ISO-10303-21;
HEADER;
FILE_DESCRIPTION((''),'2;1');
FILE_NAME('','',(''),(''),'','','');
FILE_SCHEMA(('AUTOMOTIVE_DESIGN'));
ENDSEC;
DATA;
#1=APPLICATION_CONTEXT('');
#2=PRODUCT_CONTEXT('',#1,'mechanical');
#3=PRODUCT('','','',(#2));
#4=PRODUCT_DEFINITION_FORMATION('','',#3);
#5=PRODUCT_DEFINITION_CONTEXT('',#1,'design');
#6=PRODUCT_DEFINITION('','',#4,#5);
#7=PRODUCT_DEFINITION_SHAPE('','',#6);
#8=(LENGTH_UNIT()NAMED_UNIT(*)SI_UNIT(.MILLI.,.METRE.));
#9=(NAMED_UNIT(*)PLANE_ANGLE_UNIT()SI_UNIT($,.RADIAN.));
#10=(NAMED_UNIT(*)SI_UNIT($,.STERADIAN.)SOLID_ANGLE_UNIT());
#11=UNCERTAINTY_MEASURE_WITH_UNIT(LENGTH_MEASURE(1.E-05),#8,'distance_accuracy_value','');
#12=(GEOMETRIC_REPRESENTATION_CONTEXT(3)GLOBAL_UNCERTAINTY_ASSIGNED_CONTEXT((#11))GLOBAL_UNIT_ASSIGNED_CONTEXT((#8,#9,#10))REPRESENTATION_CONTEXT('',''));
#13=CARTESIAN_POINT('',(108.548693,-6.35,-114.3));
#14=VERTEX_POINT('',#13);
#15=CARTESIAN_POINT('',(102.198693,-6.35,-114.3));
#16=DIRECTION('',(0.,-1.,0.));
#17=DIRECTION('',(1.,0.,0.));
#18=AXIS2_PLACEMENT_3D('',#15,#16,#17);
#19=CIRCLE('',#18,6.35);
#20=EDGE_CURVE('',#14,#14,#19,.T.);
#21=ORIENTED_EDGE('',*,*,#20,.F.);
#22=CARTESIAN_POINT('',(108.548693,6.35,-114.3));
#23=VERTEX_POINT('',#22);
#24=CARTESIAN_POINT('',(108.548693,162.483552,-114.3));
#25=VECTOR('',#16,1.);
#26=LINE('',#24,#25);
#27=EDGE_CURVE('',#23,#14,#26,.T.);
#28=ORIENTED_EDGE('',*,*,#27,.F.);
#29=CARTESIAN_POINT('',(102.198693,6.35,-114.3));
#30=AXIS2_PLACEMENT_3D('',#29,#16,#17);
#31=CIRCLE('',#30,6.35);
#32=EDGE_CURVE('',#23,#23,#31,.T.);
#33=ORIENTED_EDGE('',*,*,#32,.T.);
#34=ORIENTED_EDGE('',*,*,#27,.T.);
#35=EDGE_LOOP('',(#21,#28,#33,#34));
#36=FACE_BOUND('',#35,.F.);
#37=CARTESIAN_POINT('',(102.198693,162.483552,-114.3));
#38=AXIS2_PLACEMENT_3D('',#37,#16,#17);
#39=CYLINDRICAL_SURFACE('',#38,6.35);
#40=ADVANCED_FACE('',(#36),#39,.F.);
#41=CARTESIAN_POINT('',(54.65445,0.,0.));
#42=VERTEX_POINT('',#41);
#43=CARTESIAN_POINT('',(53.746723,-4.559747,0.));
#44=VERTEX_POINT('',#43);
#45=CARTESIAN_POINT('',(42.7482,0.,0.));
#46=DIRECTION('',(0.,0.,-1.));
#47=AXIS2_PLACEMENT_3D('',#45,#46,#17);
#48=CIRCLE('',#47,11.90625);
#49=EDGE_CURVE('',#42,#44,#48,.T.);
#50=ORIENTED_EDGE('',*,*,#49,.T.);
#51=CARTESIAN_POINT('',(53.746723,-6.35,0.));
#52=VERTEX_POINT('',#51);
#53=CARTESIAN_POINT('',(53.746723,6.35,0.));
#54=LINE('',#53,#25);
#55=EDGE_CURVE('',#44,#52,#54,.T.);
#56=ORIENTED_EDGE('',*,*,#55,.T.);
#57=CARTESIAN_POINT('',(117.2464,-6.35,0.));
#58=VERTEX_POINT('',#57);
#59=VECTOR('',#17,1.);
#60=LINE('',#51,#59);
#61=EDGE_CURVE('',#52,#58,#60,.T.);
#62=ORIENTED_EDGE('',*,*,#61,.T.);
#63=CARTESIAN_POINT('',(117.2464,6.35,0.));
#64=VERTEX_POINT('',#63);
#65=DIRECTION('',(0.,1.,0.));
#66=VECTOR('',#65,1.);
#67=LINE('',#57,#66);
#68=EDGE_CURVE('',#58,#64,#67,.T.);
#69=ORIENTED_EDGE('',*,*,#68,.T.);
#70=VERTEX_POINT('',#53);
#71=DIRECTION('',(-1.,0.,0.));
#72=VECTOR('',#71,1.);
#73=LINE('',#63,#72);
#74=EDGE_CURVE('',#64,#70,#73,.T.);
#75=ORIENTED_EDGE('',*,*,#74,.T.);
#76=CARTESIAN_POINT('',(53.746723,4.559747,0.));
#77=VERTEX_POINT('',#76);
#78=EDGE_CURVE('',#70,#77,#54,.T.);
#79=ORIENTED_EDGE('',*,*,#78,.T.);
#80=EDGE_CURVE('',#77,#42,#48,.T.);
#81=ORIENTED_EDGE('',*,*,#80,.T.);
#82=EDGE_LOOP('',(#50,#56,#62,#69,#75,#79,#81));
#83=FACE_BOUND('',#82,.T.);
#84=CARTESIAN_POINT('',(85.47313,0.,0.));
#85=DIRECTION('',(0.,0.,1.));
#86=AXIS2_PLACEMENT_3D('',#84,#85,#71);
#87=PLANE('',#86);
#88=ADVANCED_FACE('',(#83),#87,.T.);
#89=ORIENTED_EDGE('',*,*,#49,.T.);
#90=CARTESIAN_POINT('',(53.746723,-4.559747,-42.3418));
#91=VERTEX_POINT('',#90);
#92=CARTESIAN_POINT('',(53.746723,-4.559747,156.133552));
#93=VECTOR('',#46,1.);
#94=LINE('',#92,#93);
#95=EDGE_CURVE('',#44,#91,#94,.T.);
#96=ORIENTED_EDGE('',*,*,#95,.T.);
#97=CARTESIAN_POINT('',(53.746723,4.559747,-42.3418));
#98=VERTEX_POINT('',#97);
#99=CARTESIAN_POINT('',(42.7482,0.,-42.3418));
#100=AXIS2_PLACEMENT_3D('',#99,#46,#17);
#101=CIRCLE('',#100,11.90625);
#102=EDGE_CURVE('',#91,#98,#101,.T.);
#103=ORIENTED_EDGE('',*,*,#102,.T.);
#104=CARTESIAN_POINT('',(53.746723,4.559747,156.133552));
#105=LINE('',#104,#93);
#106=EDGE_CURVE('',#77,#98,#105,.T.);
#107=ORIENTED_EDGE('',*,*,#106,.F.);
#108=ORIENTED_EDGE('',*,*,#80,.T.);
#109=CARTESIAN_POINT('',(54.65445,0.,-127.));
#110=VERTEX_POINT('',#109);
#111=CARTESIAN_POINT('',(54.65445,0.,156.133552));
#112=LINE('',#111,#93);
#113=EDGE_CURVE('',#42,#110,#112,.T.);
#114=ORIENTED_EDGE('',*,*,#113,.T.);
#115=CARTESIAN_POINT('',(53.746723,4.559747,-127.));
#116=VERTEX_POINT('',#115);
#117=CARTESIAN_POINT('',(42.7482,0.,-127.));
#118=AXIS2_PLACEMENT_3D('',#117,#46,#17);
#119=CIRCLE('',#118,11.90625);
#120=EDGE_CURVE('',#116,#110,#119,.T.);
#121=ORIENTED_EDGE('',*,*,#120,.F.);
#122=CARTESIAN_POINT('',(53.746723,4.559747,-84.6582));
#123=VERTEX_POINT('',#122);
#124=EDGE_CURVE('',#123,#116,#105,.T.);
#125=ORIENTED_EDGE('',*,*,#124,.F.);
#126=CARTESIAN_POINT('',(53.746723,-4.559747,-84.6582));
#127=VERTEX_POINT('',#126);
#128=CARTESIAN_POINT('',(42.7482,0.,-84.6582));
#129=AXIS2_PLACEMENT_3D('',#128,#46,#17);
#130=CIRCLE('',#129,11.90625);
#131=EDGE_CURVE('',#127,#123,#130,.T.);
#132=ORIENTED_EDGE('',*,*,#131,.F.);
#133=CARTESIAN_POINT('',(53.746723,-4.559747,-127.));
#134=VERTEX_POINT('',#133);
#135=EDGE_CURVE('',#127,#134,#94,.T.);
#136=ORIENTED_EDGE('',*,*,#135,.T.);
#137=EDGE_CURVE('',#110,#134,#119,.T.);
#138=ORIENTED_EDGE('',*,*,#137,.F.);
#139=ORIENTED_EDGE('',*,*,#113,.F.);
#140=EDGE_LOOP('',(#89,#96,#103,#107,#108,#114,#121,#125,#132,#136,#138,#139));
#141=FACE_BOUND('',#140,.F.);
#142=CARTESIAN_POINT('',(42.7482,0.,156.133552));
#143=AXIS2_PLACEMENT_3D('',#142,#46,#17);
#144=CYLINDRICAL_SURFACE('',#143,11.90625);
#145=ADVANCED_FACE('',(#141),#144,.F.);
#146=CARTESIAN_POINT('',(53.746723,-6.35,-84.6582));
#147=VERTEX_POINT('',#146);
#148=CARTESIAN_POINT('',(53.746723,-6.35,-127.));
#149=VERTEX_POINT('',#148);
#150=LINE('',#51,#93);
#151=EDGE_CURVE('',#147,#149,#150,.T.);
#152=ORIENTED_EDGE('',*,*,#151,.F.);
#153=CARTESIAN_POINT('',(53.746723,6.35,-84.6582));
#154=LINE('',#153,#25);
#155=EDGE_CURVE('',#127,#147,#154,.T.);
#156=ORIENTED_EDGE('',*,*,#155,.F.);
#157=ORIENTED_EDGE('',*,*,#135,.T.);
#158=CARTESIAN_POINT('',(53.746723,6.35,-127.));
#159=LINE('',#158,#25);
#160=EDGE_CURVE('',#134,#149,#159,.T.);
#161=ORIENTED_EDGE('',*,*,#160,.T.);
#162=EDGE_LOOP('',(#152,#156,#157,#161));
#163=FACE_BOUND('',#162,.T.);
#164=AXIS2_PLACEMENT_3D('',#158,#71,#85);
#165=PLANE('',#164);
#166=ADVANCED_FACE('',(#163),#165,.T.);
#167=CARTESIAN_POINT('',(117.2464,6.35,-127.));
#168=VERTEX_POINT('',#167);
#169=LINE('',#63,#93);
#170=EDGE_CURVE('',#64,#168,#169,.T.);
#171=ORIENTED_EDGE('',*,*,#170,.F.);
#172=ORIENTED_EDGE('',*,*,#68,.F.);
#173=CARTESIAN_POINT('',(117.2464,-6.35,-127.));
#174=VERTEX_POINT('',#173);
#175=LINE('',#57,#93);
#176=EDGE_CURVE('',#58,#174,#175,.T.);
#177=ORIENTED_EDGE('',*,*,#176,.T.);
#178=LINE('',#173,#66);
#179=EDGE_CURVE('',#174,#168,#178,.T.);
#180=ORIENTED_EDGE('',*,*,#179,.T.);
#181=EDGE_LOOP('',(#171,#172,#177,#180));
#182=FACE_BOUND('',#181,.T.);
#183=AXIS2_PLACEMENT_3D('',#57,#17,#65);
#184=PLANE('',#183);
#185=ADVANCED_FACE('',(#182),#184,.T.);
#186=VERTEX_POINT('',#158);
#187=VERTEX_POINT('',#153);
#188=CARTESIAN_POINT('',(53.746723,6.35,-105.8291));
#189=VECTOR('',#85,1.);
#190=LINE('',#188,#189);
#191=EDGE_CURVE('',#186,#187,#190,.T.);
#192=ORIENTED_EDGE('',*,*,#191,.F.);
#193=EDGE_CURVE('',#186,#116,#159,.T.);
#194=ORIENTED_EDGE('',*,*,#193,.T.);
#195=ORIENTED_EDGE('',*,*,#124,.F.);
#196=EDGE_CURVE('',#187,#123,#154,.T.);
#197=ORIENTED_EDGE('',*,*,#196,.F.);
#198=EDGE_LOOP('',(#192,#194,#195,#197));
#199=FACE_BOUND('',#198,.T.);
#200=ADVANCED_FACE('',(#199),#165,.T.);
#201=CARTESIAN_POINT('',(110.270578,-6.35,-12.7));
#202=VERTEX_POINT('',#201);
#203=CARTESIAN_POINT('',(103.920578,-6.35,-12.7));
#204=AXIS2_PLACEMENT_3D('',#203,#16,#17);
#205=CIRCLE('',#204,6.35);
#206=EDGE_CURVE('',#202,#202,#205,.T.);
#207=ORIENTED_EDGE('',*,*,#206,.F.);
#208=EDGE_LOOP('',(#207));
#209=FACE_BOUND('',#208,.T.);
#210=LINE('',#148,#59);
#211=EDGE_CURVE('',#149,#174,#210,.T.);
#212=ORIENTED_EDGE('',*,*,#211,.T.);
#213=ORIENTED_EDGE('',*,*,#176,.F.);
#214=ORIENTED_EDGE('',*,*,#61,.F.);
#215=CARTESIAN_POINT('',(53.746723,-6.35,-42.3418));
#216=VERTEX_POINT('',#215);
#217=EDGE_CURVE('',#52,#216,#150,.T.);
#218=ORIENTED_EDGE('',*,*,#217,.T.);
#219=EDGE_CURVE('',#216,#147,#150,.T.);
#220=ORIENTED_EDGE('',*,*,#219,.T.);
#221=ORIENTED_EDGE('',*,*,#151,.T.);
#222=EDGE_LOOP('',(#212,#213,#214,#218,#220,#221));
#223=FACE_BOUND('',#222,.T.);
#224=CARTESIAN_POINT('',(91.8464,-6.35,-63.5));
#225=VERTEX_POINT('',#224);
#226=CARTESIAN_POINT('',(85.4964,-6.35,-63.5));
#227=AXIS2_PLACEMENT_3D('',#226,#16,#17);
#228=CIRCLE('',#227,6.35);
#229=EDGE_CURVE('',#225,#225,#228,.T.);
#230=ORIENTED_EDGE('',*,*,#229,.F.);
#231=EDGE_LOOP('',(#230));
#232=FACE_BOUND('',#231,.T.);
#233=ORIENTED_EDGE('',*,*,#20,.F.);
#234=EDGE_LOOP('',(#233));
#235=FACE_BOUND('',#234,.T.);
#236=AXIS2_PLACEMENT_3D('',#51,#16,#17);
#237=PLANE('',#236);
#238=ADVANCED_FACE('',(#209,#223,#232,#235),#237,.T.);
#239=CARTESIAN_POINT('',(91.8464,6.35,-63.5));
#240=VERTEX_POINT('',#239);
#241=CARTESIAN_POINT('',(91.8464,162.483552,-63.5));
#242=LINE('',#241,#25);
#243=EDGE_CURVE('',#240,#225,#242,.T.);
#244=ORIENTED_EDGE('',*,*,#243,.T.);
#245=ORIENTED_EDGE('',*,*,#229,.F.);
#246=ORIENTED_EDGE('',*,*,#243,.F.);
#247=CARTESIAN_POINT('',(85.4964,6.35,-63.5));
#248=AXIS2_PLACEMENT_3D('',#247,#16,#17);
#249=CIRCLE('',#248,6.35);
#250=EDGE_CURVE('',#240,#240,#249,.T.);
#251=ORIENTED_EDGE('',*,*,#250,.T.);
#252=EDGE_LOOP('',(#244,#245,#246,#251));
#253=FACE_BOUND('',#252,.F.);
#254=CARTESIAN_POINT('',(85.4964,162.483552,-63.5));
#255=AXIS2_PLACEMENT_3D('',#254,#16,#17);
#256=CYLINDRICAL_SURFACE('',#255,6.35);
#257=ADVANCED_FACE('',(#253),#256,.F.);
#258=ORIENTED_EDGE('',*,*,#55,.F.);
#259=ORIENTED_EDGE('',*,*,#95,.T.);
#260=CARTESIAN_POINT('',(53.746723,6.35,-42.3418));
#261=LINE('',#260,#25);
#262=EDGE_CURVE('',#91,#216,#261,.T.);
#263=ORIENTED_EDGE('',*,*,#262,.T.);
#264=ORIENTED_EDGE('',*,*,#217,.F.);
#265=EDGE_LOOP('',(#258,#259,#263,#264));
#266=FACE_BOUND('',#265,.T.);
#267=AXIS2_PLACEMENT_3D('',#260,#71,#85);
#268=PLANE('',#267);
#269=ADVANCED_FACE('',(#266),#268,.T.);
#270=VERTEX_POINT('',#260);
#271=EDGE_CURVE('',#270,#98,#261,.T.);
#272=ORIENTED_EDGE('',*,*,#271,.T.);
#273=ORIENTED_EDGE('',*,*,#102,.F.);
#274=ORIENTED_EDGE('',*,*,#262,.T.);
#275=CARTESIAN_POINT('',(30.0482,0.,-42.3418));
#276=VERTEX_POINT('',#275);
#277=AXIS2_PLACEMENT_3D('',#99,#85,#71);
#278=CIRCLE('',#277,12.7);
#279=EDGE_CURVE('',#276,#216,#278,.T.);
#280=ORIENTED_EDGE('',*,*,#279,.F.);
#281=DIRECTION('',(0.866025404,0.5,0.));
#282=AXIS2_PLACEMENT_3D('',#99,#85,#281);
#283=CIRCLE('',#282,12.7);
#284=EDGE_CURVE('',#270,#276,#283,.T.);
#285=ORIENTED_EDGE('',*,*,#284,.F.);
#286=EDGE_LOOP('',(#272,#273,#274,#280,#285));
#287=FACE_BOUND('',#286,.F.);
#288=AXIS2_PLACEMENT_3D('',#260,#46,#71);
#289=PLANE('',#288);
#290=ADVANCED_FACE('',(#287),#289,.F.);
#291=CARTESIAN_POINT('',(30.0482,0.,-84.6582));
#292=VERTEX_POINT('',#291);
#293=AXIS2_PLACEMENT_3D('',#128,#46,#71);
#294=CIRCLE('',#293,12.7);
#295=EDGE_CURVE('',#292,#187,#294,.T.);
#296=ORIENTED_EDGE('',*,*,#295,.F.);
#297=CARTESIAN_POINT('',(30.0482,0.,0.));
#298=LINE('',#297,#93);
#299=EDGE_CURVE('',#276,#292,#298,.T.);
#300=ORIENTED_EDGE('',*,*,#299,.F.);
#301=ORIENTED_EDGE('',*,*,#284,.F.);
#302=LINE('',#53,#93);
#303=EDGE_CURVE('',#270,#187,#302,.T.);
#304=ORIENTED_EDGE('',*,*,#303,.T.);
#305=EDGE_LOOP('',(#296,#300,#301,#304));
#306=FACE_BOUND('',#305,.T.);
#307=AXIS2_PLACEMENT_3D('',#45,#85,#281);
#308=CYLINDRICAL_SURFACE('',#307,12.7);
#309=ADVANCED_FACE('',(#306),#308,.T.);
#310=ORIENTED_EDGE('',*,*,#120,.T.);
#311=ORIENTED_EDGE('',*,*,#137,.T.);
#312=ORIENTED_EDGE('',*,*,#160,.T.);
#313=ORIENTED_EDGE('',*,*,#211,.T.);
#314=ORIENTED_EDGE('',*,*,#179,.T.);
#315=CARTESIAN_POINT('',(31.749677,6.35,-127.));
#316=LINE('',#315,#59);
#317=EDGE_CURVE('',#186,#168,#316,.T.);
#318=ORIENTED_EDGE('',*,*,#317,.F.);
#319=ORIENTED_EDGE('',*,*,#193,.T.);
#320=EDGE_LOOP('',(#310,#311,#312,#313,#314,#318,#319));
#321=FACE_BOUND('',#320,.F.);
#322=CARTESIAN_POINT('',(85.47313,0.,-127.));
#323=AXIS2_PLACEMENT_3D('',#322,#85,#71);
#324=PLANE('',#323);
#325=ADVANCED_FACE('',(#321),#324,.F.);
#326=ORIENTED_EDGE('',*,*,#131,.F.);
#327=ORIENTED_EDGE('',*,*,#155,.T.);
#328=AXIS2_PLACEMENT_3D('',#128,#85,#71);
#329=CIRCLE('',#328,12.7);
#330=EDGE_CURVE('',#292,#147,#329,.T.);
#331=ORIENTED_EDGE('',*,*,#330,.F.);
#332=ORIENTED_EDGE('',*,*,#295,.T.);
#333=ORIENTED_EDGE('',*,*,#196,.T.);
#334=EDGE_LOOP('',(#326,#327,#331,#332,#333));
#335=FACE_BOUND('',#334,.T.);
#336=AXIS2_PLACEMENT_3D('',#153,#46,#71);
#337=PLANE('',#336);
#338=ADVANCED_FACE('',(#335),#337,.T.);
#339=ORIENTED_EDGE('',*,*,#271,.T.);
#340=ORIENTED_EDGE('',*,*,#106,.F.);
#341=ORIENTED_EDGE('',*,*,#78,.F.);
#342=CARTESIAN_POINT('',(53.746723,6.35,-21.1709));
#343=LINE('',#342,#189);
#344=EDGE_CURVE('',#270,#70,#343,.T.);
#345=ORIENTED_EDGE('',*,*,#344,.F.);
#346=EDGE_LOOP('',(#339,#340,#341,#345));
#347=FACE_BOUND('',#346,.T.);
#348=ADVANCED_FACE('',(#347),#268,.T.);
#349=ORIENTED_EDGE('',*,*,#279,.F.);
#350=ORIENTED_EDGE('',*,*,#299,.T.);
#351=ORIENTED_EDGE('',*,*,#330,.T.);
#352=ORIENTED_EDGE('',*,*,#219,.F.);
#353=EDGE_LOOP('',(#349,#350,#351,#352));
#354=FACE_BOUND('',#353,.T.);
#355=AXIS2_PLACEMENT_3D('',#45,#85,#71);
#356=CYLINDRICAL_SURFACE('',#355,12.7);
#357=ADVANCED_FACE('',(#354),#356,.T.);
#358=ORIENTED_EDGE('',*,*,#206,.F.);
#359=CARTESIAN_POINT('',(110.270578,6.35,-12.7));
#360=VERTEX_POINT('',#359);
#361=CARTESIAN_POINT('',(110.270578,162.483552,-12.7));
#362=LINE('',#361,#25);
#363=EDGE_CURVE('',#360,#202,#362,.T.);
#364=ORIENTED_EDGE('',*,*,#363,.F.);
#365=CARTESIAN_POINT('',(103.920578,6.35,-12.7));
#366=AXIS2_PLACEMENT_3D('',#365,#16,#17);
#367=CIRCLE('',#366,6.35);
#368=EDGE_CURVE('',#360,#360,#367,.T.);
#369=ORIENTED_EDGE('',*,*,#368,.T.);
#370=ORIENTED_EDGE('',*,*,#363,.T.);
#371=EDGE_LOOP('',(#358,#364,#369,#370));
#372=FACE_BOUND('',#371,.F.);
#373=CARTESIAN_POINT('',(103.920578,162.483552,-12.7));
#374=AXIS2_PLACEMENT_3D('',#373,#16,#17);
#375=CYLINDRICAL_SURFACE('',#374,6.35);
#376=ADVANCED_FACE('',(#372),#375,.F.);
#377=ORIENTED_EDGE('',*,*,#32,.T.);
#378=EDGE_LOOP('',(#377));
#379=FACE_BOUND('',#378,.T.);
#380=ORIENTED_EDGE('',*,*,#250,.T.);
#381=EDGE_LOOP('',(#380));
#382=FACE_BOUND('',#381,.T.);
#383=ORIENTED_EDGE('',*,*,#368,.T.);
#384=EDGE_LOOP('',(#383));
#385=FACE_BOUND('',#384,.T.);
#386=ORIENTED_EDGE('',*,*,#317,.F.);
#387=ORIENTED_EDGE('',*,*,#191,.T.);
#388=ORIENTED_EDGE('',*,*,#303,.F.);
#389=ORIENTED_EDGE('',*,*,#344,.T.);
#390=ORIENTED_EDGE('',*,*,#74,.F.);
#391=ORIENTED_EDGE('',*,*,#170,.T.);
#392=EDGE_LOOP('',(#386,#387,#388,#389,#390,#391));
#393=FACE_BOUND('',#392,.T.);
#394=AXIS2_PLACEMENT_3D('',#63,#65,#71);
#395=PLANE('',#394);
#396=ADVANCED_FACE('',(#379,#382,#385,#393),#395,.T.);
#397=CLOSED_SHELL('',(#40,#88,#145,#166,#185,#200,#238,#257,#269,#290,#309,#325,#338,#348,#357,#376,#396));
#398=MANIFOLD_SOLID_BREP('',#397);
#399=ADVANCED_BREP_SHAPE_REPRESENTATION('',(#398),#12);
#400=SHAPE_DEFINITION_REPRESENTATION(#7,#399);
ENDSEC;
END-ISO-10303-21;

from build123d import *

# Parameters (mm, degrees)
F1_DEPTH      = 127
F2_W          = 29.5337063888
F2_H          = 42.3418
F3_DEPTH      = 25.4
F3_DEPTH_BACK = 25.4
F5_D          = 12.7
F6_D          = 23.8125
F7_ANGLE      = -180


# Not quite as in the source:
# - a length typed as a fraction of an inch, garbled in the dataset ("3 / 203.2 mm" for 3/8 in), is restored


with BuildPart() as f1:
    # F0 (on Top) → F1 (new body)
    with BuildSketch(Plane.XY):
        with BuildLine():
            Line((31.7496773719, 6.35), (-31.75, 6.35))
            Line((-31.75, 6.35), (-31.75, -6.35))
            Line((-31.75, -6.35), (31.7496773719, -6.35))
            ThreePointArc((31.7496773719, -6.35), (30.0482, 0), (31.7496773719, 6.35))
        make_face()
        with BuildLine():
            ThreePointArc((55.4482, 0), (46.0352018728, 12.2672579939), (31.7496773719, 6.35))
            Line((31.7496773719, 6.35), (31.75, 6.35))
            Line((31.75, 6.35), (31.75, -6.35))
            Line((31.75, -6.35), (31.7496773719, -6.35))
            ThreePointArc((31.7496773719, -6.35), (46.0352018728, -12.2672579939), (55.4482, 0))
        make_face()
        with BuildLine():
            Line((31.75, 6.35), (31.7496773719, 6.35))
            ThreePointArc((31.7496773719, 6.35), (30.0482, 0), (31.7496773719, -6.35))
            Line((31.7496773719, -6.35), (31.75, -6.35))
            Line((31.75, -6.35), (31.75, 6.35))
        make_face()
    extrude(amount=-F1_DEPTH)

    # F2 (on face) → F3 (cut, two sides)
    with BuildSketch(Plane.XZ.offset(6.35)) as f3_sk:
        with Locations((46.5165305664, -21.1709)):
            Rectangle(F2_W, F2_H)
        with Locations((46.5165305664, -105.8291)):
            Rectangle(F2_W, F2_H)
    extrude(amount=F3_DEPTH, mode=Mode.SUBTRACT)
    extrude(f3_sk.sketch, amount=-F3_DEPTH_BACK, mode=Mode.SUBTRACT)

    # F5 (through all)
    with Locations(Plane.XZ.offset(6.35)):
        with Locations((-18.4241778449, -12.7), (-16.7022929663, -114.3), (0, -63.5)):
            Hole(F5_D / 2)

    # F6 (through all)
    with Locations(Plane.XY):
        with Locations((42.7482, 0)):
            Hole(F6_D / 2)


with BuildPart() as f1_1:
    # F7: moved
    add(f1.part.rotate(Axis((42.7482, 0, 0), (0, 0, 1)), F7_ANGLE))


solid = f1_1.part
